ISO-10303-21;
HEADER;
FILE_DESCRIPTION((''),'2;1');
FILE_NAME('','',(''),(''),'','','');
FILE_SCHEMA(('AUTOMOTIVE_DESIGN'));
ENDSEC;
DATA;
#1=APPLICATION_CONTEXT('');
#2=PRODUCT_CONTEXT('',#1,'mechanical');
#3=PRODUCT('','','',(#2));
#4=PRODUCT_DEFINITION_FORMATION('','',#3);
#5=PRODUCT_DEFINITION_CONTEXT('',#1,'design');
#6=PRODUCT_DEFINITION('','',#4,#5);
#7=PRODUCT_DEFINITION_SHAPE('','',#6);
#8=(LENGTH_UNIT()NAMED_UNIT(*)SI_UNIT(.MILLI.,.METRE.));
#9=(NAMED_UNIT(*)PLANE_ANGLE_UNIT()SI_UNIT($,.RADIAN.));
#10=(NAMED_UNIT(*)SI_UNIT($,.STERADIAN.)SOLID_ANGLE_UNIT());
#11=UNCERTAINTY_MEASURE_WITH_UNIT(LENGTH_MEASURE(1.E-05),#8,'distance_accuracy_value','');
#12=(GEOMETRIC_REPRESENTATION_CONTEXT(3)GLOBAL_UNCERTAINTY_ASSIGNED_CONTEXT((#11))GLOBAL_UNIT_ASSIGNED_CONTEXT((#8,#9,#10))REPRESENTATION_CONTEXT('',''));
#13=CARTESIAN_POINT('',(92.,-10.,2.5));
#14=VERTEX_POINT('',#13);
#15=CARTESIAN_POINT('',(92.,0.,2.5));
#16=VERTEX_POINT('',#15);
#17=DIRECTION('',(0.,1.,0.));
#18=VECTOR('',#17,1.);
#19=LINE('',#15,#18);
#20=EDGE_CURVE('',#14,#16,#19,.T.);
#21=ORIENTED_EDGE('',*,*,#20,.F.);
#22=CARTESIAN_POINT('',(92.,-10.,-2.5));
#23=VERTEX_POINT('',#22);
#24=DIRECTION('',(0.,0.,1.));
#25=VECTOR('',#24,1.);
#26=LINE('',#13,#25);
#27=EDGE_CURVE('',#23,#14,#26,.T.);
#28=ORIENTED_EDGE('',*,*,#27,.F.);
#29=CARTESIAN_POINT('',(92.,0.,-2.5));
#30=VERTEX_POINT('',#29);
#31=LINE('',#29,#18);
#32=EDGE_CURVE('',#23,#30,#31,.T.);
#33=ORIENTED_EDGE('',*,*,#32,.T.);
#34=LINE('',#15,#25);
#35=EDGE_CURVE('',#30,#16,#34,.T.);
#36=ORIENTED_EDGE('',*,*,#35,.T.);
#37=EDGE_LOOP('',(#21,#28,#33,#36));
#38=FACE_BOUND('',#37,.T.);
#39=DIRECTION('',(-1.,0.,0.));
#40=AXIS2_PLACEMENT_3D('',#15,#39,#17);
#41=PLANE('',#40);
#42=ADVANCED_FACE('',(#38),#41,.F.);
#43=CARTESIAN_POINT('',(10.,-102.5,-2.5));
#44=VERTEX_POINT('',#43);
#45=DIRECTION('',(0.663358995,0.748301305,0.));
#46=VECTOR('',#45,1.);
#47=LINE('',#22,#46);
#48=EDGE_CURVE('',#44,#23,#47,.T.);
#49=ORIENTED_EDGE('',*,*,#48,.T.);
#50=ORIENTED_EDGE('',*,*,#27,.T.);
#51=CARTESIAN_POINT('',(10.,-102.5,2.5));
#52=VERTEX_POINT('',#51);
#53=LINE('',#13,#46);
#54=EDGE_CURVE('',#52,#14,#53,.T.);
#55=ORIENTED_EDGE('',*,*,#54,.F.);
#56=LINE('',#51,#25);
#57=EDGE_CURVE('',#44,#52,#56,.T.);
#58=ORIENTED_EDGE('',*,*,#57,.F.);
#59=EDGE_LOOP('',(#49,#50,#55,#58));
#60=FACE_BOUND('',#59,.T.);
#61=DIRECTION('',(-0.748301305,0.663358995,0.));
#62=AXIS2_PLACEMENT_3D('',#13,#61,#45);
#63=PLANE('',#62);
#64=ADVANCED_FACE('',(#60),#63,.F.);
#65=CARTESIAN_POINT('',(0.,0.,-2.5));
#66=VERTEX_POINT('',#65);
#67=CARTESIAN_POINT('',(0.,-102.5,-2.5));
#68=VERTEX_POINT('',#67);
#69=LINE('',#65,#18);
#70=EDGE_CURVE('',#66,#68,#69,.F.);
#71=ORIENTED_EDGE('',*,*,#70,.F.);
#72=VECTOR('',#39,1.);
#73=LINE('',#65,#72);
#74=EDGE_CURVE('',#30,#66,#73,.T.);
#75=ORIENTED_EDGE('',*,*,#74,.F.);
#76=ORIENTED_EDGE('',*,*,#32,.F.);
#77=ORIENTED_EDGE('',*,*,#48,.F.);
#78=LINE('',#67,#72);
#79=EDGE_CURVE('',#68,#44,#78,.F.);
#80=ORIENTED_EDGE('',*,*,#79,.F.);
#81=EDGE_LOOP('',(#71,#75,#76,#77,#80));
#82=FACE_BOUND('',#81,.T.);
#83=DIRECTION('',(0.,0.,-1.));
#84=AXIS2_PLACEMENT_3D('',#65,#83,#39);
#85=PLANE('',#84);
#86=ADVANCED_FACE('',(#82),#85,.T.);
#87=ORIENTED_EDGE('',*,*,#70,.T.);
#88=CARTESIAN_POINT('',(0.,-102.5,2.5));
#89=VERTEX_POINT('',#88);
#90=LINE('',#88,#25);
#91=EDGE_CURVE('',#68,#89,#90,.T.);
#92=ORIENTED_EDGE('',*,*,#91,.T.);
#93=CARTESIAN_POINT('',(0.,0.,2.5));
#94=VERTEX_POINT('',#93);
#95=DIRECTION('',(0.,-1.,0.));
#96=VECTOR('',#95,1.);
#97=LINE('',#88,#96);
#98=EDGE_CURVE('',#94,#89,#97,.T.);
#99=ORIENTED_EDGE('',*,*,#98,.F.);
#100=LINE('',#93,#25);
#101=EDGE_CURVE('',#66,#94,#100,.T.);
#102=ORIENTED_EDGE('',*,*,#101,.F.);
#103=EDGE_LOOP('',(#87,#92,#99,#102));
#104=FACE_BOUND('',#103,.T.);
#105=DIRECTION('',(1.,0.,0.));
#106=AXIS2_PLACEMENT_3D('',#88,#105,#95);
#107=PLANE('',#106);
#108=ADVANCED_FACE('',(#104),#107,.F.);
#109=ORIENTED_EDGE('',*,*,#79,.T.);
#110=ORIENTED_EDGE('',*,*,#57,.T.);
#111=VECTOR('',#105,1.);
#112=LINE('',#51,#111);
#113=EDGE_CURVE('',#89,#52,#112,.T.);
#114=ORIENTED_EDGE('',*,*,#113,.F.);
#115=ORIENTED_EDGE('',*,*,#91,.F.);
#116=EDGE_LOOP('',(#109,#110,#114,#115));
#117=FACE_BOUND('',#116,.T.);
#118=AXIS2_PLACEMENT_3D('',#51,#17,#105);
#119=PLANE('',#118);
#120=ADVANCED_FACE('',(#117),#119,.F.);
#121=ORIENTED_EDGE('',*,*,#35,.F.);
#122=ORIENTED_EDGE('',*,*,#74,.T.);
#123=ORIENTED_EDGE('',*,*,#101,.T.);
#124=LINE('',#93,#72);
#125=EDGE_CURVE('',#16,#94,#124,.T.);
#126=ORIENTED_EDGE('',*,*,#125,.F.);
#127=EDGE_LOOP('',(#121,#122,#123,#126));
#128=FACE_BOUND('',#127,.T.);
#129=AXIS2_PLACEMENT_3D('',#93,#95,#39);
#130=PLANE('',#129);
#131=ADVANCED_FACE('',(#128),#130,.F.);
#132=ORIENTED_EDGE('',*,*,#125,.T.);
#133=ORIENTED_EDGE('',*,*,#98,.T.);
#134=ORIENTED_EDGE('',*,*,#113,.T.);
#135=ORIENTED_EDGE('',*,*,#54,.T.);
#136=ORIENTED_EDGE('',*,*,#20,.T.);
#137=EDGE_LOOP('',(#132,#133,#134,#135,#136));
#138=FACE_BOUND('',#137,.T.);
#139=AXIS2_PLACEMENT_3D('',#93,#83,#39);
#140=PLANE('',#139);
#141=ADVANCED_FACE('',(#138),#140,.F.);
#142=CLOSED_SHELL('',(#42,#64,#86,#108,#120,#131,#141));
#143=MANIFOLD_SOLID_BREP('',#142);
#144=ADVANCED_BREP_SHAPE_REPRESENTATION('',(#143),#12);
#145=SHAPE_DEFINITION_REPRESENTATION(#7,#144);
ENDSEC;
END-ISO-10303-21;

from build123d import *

# Parameters (mm, degrees)
EXTRUDE_1_DEPTH = 2.5


with BuildPart() as part:
    # Sketch 1 → Бобышка-Вытянуть1 (new, symmetric)
    with BuildSketch(Plane.XY):
        Polygon((0, 0), (92, 0), (92, -10), (10, -102.5), (0, -102.5), align=None)
    extrude(amount=EXTRUDE_1_DEPTH, both=True)


solid = part.part
